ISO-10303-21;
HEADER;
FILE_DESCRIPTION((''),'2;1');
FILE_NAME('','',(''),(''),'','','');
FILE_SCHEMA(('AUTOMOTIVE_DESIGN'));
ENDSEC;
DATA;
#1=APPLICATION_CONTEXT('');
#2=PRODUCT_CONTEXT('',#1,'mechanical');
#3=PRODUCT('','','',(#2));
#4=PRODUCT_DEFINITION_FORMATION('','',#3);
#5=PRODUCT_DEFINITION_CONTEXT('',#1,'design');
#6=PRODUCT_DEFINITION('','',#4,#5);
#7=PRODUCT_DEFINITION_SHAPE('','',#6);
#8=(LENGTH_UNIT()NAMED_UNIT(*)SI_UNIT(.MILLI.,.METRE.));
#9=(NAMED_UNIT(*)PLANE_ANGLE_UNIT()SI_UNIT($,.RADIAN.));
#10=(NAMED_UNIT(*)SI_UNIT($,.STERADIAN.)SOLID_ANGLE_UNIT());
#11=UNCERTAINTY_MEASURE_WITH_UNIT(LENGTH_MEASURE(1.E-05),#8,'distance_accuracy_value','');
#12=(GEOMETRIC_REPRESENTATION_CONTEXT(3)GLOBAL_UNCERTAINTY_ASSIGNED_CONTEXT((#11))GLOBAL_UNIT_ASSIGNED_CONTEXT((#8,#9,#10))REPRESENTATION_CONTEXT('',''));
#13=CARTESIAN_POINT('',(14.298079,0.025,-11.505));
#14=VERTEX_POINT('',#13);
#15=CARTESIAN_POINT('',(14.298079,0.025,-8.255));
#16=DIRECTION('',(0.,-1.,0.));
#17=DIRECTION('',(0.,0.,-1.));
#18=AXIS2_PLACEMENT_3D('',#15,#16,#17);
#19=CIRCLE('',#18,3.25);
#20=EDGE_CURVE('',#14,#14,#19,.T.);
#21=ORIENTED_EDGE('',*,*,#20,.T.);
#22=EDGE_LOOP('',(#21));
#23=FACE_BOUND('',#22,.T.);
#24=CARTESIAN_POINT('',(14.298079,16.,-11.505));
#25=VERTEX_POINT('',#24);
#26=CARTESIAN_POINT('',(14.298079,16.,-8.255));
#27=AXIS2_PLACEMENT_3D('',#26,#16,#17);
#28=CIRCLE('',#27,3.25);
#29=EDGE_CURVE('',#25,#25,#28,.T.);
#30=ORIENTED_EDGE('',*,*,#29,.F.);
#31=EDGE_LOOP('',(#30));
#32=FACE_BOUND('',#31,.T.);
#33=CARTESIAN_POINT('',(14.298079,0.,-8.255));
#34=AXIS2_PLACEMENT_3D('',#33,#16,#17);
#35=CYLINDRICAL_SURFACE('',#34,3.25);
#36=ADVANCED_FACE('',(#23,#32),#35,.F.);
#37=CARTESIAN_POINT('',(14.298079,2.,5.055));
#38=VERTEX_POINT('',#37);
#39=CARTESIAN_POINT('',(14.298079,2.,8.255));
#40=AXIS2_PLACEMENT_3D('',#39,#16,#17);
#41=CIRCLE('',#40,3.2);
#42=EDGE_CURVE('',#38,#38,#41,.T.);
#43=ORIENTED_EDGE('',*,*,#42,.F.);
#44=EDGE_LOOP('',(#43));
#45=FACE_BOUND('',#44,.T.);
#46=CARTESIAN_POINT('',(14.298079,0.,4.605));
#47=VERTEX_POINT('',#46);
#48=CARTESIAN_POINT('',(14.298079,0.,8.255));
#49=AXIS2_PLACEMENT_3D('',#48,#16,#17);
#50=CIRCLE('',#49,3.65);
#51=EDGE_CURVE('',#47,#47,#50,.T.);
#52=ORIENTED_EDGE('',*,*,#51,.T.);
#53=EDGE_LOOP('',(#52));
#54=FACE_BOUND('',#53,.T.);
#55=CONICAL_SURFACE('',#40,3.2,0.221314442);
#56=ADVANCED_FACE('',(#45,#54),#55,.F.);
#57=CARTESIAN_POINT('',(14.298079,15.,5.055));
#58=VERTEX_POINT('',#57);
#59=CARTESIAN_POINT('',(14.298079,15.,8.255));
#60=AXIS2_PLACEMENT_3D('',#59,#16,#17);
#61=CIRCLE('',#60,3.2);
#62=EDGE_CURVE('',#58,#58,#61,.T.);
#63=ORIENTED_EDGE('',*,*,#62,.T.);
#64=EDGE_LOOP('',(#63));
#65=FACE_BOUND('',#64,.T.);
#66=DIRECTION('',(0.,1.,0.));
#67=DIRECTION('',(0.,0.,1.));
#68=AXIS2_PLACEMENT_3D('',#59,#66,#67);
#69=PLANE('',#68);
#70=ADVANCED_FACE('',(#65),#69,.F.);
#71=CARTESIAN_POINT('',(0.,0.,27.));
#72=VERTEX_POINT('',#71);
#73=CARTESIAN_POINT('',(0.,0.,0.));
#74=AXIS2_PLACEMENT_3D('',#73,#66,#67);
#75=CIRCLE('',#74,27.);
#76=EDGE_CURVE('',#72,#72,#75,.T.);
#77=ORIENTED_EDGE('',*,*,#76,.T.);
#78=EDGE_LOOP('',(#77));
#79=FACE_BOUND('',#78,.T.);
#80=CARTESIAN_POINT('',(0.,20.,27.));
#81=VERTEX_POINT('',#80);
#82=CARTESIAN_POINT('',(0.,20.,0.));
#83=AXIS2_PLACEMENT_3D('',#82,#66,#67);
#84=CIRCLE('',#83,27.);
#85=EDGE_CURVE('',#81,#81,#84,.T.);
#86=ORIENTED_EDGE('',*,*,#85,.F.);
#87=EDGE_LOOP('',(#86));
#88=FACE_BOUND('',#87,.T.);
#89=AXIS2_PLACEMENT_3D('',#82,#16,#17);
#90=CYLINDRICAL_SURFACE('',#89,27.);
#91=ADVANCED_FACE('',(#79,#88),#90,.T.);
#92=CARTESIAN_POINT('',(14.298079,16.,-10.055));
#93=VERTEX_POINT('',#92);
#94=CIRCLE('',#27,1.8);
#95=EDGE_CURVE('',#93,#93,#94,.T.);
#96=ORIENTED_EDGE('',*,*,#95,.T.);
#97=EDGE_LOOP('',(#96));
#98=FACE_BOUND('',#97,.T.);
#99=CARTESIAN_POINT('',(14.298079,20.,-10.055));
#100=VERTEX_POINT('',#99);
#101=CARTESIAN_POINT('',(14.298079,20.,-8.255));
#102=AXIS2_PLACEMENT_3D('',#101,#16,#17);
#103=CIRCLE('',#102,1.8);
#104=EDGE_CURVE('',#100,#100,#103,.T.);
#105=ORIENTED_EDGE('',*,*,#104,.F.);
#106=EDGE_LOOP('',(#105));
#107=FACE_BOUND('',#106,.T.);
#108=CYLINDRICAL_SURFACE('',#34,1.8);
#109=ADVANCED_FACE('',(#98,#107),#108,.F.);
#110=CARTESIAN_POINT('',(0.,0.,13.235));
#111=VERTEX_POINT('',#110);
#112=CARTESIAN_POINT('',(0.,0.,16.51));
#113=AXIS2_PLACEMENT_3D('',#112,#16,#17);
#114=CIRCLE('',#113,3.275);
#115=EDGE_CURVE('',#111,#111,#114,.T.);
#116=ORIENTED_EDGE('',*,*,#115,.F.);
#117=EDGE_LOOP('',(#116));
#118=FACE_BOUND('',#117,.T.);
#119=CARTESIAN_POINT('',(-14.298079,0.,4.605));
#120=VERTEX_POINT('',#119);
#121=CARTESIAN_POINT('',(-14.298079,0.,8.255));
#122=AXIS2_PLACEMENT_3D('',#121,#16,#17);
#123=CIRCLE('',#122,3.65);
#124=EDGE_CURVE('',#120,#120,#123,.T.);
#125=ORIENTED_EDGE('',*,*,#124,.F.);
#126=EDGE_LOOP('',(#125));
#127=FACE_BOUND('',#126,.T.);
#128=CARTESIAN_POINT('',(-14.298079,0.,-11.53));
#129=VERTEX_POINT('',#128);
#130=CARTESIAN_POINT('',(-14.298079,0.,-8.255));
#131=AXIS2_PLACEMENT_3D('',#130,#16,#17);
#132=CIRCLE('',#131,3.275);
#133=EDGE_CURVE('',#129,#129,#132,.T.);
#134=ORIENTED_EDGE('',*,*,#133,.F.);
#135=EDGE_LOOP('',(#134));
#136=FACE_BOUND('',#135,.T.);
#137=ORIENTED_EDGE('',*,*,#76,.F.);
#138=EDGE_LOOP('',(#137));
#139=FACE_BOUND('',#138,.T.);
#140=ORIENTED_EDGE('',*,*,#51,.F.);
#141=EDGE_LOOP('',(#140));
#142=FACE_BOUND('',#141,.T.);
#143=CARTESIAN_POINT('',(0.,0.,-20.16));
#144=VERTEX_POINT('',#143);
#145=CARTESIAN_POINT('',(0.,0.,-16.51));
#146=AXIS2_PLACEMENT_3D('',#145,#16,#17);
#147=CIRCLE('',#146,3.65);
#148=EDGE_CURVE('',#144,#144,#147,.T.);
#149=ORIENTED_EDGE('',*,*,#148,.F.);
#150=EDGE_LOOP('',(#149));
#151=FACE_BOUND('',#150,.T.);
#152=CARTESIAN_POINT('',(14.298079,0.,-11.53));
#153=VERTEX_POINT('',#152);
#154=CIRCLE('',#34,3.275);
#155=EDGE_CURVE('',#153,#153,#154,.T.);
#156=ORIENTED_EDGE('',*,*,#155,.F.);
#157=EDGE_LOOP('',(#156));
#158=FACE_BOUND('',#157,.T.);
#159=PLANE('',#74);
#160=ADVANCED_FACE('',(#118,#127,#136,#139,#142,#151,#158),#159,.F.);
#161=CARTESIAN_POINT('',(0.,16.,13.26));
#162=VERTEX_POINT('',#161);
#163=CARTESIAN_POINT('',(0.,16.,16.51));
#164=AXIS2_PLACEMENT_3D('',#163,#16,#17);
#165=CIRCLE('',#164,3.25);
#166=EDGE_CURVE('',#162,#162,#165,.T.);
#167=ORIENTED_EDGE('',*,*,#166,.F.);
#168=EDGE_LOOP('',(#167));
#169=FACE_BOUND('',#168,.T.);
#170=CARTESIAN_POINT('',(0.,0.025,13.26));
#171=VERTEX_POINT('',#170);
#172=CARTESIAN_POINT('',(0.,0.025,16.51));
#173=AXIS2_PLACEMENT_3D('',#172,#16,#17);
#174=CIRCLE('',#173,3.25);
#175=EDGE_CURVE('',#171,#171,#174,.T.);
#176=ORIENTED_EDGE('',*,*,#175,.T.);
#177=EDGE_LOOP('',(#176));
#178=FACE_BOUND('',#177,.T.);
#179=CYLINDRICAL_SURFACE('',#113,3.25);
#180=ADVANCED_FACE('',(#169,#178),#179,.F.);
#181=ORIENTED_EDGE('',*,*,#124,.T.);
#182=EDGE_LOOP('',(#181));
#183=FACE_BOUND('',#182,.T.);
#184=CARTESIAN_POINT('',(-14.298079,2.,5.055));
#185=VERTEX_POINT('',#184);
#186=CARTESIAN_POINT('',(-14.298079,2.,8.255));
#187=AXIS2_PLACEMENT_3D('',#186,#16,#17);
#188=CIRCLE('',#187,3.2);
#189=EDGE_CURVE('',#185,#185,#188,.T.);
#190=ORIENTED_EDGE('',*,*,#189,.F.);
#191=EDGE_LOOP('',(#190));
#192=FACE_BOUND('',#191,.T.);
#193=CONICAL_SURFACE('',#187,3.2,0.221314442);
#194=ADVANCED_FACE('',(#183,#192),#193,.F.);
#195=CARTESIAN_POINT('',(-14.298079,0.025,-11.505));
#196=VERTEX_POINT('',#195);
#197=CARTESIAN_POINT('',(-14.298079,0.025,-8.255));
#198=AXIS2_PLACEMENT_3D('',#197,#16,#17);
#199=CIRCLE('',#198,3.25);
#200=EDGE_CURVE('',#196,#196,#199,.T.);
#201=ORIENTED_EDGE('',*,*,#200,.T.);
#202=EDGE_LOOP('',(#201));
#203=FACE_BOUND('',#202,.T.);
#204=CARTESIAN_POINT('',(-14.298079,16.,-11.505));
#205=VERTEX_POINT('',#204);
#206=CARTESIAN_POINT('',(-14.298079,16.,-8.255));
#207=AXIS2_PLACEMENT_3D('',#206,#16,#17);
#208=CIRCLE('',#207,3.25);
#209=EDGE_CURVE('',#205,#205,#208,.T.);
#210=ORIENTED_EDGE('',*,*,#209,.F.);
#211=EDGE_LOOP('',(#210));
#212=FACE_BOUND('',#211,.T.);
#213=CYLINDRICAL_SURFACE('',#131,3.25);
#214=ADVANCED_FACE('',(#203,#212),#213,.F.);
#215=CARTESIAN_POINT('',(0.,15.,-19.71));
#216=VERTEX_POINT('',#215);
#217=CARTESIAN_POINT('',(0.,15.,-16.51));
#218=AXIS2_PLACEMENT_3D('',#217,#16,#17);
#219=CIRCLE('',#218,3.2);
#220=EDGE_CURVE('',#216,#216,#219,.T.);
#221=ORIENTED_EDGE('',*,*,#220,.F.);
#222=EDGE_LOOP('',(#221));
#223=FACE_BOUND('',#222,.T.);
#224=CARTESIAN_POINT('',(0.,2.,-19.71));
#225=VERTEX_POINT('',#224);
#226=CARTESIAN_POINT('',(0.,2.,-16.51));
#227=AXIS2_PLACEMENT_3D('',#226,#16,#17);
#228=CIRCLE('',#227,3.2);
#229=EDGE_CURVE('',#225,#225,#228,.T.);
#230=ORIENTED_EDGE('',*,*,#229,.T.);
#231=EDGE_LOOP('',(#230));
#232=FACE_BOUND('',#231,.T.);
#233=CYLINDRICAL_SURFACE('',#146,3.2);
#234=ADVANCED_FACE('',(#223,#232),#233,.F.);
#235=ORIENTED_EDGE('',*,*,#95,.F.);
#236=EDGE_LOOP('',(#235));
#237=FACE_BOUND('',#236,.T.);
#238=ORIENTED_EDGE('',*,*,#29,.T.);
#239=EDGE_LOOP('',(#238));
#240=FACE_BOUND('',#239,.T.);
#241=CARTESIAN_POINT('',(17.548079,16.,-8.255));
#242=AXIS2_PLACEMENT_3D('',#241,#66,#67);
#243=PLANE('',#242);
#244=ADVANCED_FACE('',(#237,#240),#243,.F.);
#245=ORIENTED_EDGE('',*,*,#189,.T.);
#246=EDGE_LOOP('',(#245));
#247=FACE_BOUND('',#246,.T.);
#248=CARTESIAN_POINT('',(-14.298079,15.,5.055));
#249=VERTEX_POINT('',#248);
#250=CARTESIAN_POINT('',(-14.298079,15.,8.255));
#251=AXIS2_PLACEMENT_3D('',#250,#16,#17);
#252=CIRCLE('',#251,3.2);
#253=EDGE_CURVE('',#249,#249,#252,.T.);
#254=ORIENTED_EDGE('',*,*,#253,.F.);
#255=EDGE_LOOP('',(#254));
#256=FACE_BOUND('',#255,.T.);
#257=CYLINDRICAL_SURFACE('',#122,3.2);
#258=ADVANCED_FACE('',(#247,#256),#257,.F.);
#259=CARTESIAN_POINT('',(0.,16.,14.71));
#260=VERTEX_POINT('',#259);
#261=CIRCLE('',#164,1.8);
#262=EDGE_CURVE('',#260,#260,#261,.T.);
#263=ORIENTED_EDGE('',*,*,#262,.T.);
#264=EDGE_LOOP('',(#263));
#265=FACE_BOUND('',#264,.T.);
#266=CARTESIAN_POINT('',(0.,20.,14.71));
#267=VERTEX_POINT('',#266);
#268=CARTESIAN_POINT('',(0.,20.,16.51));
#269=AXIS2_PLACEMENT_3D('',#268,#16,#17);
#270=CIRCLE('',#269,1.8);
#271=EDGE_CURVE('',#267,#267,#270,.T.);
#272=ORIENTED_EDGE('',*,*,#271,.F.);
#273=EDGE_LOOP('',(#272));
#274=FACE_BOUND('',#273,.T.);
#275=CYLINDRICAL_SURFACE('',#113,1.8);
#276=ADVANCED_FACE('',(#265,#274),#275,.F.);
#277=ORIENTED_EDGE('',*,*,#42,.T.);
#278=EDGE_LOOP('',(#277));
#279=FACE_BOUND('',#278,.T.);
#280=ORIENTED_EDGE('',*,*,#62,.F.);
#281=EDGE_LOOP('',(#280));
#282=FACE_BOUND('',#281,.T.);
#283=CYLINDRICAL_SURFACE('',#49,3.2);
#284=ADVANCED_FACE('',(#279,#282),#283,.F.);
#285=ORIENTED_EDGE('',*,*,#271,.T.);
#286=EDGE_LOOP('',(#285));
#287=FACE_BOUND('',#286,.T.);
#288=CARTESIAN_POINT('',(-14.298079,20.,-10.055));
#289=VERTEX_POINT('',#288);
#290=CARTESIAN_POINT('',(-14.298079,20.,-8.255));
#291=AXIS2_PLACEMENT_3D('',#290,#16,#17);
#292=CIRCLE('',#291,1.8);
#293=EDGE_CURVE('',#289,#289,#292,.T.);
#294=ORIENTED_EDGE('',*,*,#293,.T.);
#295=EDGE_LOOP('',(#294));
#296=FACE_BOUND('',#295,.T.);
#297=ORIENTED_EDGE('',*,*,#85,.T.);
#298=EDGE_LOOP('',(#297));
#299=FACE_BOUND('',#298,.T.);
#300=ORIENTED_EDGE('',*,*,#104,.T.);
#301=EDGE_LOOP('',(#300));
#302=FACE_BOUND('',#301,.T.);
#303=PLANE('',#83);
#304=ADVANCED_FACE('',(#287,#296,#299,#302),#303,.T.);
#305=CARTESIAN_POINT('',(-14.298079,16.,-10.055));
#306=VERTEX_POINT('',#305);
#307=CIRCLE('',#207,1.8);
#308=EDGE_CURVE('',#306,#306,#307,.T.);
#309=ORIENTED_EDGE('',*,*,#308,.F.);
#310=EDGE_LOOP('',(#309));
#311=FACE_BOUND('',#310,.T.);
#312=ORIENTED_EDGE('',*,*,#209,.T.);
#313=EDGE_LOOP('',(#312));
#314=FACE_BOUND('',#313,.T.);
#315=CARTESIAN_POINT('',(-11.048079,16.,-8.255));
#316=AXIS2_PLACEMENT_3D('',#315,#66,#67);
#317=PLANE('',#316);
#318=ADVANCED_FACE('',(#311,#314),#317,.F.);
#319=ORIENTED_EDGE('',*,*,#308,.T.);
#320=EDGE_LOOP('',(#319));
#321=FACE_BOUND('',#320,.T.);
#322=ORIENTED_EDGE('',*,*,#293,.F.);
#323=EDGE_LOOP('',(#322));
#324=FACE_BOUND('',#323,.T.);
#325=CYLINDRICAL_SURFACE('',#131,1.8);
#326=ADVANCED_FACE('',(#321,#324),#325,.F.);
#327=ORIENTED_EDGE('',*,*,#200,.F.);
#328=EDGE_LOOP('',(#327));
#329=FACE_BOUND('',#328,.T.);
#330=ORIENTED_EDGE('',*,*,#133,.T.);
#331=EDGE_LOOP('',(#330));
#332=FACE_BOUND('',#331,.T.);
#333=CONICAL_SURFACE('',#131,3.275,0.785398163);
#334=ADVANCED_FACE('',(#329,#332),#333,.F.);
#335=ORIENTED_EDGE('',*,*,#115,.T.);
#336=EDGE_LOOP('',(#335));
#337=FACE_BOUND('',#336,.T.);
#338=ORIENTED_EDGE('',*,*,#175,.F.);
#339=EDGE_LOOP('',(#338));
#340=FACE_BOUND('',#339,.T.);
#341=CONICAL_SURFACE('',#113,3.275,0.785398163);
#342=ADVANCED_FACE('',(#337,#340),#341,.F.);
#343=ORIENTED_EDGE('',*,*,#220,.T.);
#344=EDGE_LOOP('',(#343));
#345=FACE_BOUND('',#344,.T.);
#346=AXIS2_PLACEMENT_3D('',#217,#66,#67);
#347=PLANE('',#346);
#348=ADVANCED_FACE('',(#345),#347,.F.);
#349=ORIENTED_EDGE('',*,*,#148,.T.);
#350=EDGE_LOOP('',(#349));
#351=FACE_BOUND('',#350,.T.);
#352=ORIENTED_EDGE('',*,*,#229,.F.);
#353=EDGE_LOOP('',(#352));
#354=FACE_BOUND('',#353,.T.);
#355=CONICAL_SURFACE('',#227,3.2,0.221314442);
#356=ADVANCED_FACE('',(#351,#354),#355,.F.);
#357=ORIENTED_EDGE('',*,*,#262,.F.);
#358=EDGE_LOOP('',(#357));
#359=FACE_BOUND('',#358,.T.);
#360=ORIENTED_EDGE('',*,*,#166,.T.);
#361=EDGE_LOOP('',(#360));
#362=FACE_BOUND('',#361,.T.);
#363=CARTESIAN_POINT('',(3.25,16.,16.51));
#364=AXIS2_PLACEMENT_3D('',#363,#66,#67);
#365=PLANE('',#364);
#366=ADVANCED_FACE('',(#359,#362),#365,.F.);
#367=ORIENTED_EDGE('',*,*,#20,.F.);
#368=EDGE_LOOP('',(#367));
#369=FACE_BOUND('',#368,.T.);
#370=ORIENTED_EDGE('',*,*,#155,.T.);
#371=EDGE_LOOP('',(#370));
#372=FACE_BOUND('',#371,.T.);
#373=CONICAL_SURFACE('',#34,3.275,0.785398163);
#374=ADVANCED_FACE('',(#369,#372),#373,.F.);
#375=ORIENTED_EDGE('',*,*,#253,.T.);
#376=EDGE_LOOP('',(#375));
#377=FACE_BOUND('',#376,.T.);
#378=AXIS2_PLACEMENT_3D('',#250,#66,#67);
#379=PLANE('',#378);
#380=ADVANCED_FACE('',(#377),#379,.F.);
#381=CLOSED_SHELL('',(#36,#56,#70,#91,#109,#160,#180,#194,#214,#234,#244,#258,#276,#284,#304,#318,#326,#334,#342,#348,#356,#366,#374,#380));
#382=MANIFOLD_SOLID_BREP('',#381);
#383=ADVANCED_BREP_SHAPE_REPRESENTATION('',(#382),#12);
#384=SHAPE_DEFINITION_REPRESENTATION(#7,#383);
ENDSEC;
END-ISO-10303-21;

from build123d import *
from OCP.BRepFilletAPI import BRepFilletAPI_MakeChamfer

# Parameters (mm, degrees)
SKETCH2_R                     = 27
BOSS_EXTRUDE2_DEPTH           = 20
CBORE_FOR_M3_SHCS1_AT_2_COUNT = 2
CBORE_FOR_M3_SHCS1_AT_2_PITCH = 28.596158833
CBORE_FOR_M3_SHCS1_AT_3_COUNT = 2
CBORE_FOR_M3_SHCS1_AT_3_PITCH = 28.596158833
HOLE1_D                       = 6.4
HOLE1_DEPTH                   = 15
HOLE1_CBORE_D                 = 7.3
HOLE1_CBORE_DEPTH             = 2
CHAMFER1_SIZE                 = 2
CHAMFER1_SIZE_2               = 0.45


with BuildPart() as part:
    # Sketch2 → Boss-Extrude2 (new body)
    with BuildSketch(Plane(origin=(0, 0, 0), x_dir=(1, 0, 0), z_dir=(0, 1, 0))):
        with Locations(Location((0, 0, 0), (0, 0, 270))):
            Circle(SKETCH2_R)
    extrude(amount=BOSS_EXTRUDE2_DEPTH)

    # Sketch5 → CBORE for M3 SHCS1 (revolve, cut)
    with BuildSketch(Plane(origin=(0, 0, 16.51), x_dir=(0, 0, -1), z_dir=(1, 0, 0))):
        Polygon((0, 0), (0, 20), (1.8, 20), (1.8, 16), (3.25, 16), (3.25, 0.025), (3.275, 0), align=None)
    cbore_for_m3_shcs1 = revolve(axis=Axis((0, -6.35, 16.51), (0, 1, 0)), mode=Mode.SUBTRACT)

    # CBORE for M3 SHCS1 at 2: CBORE for M3 SHCS1 ×2
    with Locations(*[Vector(0.5000000000000012, 0, -0.8660254037844379) * (i * CBORE_FOR_M3_SHCS1_AT_2_PITCH) for i in range(1, CBORE_FOR_M3_SHCS1_AT_2_COUNT)]):
        add(cbore_for_m3_shcs1, mode=Mode.SUBTRACT)

    # CBORE for M3 SHCS1 at 3: CBORE for M3 SHCS1 ×2
    with Locations(*[Vector(-0.4999999999999978, 0, -0.8660254037844399) * (i * CBORE_FOR_M3_SHCS1_AT_3_PITCH) for i in range(1, CBORE_FOR_M3_SHCS1_AT_3_COUNT)]):
        add(cbore_for_m3_shcs1, mode=Mode.SUBTRACT)

    # Hole1
    with Locations(Plane(origin=(0, 0, 0), x_dir=(-1, 0, 0), z_dir=(0, -1, 0))):
        with Locations((14.298079416, -8.255), (0, 16.51), (-14.298079416, -8.255)):
            CounterBoreHole(HOLE1_D / 2, HOLE1_CBORE_D / 2, HOLE1_CBORE_DEPTH, depth=HOLE1_DEPTH)

    # Chamfer1
    chamfer1_edges_1 = [part.edges().sort_by_distance(p)[0] for p in [
        (17.948079416, 2, 8.255),
    ]]
    chamfer1_side_1 = [part.faces().sort_by_distance(p)[0] for p in [
        (17.948079416, 1.991, 8.255),
    ]]
    chamfer1_edges_2 = [part.edges().sort_by_distance(p)[0] for p in [
        (3.65, 2, -16.51),
    ]]
    chamfer1_side_2 = [part.faces().sort_by_distance(p)[0] for p in [
        (3.65, 1.991, -16.51),
    ]]
    chamfer1_edges_3 = [part.edges().sort_by_distance(p)[0] for p in [
        (-10.648079416, 2, 8.255),
    ]]
    chamfer1_side_3 = [part.faces().sort_by_distance(p)[0] for p in [
        (-10.648079416, 1.991, 8.255),
    ]]
    chamfer1 = BRepFilletAPI_MakeChamfer(part.part.solid().wrapped)
    for e in chamfer1_edges_1:
        chamfer1.Add(CHAMFER1_SIZE - 0.0001, CHAMFER1_SIZE_2 - 0.0001, e.wrapped, chamfer1_side_1[0].wrapped)
    for e in chamfer1_edges_2:
        chamfer1.Add(CHAMFER1_SIZE - 0.0001, CHAMFER1_SIZE_2 - 0.0001, e.wrapped, chamfer1_side_2[0].wrapped)
    for e in chamfer1_edges_3:
        chamfer1.Add(CHAMFER1_SIZE - 0.0001, CHAMFER1_SIZE_2 - 0.0001, e.wrapped, chamfer1_side_3[0].wrapped)
    add(Compound.cast(chamfer1.Shape()), mode=Mode.REPLACE)  # a hair under: the kernel refuses the full size


solid = part.part
